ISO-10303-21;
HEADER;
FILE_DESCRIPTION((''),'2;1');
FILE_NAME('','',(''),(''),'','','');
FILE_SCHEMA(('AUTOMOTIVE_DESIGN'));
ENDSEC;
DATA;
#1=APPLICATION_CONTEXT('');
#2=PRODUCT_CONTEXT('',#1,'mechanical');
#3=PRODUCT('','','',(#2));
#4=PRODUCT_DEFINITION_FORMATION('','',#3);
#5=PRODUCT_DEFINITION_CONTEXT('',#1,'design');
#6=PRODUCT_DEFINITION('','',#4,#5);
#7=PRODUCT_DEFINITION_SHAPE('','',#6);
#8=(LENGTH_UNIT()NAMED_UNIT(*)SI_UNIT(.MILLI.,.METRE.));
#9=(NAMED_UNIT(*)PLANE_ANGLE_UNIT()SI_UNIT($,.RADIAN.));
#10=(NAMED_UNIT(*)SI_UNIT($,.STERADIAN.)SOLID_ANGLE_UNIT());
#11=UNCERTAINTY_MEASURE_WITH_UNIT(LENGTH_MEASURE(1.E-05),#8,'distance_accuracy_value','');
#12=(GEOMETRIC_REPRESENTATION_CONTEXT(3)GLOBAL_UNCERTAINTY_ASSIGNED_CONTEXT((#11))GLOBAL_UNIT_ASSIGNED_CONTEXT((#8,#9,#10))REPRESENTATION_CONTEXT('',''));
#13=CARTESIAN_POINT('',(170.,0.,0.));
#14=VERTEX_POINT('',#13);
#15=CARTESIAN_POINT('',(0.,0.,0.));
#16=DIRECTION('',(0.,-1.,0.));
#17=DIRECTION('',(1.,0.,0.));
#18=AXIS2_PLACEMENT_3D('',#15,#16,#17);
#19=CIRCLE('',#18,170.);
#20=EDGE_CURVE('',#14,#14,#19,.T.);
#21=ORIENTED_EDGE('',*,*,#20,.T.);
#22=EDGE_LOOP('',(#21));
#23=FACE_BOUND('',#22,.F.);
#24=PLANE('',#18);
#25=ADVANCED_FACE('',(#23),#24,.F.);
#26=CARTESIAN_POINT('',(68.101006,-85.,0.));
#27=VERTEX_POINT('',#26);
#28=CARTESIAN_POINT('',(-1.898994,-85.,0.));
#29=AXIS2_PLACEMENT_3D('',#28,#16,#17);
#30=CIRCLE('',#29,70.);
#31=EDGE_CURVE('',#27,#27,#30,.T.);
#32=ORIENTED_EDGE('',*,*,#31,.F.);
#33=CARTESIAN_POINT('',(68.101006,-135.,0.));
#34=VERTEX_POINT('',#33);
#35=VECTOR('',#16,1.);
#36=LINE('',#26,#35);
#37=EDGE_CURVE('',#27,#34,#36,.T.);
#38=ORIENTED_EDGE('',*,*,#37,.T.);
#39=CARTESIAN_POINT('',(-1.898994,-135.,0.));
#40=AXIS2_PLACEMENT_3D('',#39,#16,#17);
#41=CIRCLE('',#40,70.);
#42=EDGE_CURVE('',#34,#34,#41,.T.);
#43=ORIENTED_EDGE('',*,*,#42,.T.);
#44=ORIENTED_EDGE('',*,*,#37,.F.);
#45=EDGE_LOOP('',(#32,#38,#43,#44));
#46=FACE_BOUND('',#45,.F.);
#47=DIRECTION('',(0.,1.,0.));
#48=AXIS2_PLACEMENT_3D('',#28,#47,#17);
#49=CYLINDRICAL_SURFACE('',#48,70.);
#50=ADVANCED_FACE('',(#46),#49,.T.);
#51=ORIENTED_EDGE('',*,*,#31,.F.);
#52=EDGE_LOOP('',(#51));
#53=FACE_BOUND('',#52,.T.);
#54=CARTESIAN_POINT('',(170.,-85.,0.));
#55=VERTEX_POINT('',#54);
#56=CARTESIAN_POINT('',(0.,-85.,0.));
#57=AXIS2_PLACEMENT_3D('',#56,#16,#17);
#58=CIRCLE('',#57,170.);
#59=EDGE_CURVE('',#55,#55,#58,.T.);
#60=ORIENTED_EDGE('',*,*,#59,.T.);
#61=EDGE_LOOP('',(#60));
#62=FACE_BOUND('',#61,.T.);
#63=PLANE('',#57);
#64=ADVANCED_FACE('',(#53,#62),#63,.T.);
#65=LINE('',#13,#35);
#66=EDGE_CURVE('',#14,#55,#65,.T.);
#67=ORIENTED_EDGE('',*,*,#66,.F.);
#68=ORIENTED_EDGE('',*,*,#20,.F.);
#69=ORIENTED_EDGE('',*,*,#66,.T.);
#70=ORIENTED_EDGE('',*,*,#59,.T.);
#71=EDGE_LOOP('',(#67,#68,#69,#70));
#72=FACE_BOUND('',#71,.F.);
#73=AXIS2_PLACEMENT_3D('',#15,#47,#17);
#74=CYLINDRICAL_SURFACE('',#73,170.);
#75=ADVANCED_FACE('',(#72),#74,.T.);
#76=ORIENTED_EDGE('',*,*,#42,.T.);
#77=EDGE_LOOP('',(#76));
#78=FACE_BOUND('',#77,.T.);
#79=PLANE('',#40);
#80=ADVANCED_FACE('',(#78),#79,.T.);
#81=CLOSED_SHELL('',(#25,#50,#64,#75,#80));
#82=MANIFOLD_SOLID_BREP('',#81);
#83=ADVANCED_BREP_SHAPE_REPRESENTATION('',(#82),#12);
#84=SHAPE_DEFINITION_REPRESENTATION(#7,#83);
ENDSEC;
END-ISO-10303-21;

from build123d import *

# Parameters (mm, degrees)
F0_R     = 170
F1_DEPTH = 85
F2_R     = 70
F3_DEPTH = 50


# Not quite as in the source:
# - the program builds the solid bodies; features that only make, move or delete a surface that nothing else refers to are left out


with BuildPart() as f1:
    # F0 (on Front) → F1 (new body)
    with BuildSketch(Plane.XZ):
        Circle(F0_R)
    extrude(amount=F1_DEPTH)

    # F2 (on face) → F3 (join)
    with BuildSketch(Plane.XZ.offset(85)):
        with Locations((-1.8989939419, 0)):
            Circle(F2_R)
    extrude(amount=F3_DEPTH)


solid = f1.part
